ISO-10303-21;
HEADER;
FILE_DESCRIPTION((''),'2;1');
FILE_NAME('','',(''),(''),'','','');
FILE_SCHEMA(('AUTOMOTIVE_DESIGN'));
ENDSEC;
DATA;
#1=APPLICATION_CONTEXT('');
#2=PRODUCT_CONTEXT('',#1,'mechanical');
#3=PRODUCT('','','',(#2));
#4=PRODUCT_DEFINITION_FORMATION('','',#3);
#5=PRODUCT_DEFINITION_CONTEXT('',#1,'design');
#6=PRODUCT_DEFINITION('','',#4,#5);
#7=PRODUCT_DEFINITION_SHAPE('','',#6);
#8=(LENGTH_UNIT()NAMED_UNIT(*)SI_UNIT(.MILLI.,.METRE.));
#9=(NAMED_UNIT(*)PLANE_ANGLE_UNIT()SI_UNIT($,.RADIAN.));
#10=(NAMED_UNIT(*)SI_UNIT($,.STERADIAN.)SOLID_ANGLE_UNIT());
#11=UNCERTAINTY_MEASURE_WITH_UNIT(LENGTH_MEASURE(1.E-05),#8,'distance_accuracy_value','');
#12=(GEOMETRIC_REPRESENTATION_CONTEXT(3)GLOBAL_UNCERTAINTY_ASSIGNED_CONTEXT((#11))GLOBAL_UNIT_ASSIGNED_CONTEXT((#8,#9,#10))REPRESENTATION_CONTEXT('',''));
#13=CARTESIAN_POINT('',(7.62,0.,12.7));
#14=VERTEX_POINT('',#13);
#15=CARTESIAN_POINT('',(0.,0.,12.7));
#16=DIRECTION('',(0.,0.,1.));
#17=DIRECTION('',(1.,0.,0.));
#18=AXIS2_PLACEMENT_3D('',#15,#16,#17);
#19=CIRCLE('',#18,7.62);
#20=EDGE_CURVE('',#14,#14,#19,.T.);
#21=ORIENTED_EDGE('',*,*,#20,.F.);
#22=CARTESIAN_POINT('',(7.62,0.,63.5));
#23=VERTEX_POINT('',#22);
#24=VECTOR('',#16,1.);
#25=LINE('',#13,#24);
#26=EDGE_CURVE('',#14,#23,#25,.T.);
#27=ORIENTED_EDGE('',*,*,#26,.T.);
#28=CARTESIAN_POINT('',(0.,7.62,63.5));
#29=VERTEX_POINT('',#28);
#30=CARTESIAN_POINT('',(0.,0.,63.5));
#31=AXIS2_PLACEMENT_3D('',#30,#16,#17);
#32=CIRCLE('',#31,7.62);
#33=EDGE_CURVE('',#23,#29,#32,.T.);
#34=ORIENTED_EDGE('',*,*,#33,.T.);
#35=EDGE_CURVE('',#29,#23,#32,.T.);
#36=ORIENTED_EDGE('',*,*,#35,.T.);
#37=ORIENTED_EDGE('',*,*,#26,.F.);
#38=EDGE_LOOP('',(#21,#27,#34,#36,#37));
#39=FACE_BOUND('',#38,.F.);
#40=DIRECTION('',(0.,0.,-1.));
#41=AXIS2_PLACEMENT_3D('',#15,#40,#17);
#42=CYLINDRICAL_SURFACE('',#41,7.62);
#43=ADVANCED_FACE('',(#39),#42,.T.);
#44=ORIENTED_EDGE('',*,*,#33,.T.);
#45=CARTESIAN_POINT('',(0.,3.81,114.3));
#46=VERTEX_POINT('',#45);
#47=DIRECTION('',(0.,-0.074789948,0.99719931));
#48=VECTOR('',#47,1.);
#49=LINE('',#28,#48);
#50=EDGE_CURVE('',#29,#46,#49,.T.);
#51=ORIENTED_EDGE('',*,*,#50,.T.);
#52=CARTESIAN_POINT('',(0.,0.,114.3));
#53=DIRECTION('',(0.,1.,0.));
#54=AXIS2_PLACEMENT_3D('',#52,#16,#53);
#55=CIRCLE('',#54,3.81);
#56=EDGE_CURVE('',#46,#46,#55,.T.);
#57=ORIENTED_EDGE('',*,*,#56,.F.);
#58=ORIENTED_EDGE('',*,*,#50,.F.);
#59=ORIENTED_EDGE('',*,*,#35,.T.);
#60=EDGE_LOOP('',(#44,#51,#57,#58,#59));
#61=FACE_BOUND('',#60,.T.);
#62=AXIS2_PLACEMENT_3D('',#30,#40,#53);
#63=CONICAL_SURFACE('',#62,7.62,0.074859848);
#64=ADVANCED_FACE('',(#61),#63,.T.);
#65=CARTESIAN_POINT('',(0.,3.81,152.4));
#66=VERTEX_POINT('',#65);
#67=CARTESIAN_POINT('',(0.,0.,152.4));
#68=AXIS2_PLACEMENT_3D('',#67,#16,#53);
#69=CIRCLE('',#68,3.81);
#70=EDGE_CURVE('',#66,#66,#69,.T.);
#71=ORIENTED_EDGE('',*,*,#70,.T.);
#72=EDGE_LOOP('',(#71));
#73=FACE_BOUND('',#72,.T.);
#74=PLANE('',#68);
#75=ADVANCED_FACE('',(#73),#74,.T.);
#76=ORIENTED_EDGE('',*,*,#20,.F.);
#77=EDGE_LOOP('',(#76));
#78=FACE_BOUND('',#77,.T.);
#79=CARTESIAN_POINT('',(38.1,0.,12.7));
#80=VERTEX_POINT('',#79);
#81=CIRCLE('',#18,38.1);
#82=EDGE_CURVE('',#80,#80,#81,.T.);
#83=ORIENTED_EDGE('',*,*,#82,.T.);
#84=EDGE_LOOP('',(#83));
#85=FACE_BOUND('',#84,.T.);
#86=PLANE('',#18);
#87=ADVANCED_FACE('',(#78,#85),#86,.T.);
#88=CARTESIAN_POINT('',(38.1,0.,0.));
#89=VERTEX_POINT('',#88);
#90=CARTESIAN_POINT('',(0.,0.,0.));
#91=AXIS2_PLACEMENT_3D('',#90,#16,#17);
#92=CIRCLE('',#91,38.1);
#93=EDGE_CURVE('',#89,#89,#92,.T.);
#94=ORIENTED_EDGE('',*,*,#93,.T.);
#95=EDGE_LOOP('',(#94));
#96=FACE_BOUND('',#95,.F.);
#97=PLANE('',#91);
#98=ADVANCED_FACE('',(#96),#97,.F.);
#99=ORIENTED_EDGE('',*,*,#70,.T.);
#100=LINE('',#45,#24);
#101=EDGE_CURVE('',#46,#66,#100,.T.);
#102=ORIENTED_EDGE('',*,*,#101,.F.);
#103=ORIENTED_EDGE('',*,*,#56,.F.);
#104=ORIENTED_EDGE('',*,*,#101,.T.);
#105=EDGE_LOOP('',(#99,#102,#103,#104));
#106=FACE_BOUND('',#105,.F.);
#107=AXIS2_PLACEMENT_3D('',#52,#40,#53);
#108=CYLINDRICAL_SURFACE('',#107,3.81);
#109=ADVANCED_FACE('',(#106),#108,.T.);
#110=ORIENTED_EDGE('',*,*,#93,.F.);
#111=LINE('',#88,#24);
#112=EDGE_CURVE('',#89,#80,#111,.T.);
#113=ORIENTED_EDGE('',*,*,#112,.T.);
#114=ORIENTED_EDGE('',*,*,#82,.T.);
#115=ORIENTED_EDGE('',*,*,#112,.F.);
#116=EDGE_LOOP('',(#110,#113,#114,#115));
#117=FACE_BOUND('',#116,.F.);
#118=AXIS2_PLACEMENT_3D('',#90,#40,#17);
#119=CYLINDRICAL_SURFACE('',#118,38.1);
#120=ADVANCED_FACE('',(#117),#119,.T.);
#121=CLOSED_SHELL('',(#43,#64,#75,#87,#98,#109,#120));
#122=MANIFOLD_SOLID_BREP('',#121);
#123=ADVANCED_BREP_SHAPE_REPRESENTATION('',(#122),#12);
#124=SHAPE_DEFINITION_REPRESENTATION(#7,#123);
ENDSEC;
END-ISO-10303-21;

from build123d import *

# Parameters (mm, degrees)
F0_R     = 38.1
F1_DEPTH = 12.7
F2_R     = 7.62
F3_DEPTH = 50.8
F6_DEPTH = 38.1


# Not quite as in the source:
# - a feature names something its author has since deleted; it is built from what else it names


with BuildPart() as f1:
    # F0 (on Top) → F1 (new body)
    with BuildSketch(Plane.XY):
        Circle(F0_R)
    extrude(amount=F1_DEPTH)

    # F2 (on face) → F3 (join)
    with BuildSketch(Plane.XY.offset(12.7)):
        Circle(F2_R)
    extrude(amount=F3_DEPTH)

    # F4 (on Right) → F5 (revolve)
    with BuildSketch(Plane.YZ):
        Polygon((0, 114.3), (0, 63.5), (7.62, 63.5), (3.81, 114.3), align=None)
    revolve(axis=Axis((0, 0, 88.9), (0, 0, 1)))

    # F6 (add): a face of the model
    f6_faces = [f1.faces().sort_by_distance(p)[0] for p in [
        (0, 0, 114.3),
    ]]
    extrude(f6_faces, amount=F6_DEPTH)


solid = f1.part
